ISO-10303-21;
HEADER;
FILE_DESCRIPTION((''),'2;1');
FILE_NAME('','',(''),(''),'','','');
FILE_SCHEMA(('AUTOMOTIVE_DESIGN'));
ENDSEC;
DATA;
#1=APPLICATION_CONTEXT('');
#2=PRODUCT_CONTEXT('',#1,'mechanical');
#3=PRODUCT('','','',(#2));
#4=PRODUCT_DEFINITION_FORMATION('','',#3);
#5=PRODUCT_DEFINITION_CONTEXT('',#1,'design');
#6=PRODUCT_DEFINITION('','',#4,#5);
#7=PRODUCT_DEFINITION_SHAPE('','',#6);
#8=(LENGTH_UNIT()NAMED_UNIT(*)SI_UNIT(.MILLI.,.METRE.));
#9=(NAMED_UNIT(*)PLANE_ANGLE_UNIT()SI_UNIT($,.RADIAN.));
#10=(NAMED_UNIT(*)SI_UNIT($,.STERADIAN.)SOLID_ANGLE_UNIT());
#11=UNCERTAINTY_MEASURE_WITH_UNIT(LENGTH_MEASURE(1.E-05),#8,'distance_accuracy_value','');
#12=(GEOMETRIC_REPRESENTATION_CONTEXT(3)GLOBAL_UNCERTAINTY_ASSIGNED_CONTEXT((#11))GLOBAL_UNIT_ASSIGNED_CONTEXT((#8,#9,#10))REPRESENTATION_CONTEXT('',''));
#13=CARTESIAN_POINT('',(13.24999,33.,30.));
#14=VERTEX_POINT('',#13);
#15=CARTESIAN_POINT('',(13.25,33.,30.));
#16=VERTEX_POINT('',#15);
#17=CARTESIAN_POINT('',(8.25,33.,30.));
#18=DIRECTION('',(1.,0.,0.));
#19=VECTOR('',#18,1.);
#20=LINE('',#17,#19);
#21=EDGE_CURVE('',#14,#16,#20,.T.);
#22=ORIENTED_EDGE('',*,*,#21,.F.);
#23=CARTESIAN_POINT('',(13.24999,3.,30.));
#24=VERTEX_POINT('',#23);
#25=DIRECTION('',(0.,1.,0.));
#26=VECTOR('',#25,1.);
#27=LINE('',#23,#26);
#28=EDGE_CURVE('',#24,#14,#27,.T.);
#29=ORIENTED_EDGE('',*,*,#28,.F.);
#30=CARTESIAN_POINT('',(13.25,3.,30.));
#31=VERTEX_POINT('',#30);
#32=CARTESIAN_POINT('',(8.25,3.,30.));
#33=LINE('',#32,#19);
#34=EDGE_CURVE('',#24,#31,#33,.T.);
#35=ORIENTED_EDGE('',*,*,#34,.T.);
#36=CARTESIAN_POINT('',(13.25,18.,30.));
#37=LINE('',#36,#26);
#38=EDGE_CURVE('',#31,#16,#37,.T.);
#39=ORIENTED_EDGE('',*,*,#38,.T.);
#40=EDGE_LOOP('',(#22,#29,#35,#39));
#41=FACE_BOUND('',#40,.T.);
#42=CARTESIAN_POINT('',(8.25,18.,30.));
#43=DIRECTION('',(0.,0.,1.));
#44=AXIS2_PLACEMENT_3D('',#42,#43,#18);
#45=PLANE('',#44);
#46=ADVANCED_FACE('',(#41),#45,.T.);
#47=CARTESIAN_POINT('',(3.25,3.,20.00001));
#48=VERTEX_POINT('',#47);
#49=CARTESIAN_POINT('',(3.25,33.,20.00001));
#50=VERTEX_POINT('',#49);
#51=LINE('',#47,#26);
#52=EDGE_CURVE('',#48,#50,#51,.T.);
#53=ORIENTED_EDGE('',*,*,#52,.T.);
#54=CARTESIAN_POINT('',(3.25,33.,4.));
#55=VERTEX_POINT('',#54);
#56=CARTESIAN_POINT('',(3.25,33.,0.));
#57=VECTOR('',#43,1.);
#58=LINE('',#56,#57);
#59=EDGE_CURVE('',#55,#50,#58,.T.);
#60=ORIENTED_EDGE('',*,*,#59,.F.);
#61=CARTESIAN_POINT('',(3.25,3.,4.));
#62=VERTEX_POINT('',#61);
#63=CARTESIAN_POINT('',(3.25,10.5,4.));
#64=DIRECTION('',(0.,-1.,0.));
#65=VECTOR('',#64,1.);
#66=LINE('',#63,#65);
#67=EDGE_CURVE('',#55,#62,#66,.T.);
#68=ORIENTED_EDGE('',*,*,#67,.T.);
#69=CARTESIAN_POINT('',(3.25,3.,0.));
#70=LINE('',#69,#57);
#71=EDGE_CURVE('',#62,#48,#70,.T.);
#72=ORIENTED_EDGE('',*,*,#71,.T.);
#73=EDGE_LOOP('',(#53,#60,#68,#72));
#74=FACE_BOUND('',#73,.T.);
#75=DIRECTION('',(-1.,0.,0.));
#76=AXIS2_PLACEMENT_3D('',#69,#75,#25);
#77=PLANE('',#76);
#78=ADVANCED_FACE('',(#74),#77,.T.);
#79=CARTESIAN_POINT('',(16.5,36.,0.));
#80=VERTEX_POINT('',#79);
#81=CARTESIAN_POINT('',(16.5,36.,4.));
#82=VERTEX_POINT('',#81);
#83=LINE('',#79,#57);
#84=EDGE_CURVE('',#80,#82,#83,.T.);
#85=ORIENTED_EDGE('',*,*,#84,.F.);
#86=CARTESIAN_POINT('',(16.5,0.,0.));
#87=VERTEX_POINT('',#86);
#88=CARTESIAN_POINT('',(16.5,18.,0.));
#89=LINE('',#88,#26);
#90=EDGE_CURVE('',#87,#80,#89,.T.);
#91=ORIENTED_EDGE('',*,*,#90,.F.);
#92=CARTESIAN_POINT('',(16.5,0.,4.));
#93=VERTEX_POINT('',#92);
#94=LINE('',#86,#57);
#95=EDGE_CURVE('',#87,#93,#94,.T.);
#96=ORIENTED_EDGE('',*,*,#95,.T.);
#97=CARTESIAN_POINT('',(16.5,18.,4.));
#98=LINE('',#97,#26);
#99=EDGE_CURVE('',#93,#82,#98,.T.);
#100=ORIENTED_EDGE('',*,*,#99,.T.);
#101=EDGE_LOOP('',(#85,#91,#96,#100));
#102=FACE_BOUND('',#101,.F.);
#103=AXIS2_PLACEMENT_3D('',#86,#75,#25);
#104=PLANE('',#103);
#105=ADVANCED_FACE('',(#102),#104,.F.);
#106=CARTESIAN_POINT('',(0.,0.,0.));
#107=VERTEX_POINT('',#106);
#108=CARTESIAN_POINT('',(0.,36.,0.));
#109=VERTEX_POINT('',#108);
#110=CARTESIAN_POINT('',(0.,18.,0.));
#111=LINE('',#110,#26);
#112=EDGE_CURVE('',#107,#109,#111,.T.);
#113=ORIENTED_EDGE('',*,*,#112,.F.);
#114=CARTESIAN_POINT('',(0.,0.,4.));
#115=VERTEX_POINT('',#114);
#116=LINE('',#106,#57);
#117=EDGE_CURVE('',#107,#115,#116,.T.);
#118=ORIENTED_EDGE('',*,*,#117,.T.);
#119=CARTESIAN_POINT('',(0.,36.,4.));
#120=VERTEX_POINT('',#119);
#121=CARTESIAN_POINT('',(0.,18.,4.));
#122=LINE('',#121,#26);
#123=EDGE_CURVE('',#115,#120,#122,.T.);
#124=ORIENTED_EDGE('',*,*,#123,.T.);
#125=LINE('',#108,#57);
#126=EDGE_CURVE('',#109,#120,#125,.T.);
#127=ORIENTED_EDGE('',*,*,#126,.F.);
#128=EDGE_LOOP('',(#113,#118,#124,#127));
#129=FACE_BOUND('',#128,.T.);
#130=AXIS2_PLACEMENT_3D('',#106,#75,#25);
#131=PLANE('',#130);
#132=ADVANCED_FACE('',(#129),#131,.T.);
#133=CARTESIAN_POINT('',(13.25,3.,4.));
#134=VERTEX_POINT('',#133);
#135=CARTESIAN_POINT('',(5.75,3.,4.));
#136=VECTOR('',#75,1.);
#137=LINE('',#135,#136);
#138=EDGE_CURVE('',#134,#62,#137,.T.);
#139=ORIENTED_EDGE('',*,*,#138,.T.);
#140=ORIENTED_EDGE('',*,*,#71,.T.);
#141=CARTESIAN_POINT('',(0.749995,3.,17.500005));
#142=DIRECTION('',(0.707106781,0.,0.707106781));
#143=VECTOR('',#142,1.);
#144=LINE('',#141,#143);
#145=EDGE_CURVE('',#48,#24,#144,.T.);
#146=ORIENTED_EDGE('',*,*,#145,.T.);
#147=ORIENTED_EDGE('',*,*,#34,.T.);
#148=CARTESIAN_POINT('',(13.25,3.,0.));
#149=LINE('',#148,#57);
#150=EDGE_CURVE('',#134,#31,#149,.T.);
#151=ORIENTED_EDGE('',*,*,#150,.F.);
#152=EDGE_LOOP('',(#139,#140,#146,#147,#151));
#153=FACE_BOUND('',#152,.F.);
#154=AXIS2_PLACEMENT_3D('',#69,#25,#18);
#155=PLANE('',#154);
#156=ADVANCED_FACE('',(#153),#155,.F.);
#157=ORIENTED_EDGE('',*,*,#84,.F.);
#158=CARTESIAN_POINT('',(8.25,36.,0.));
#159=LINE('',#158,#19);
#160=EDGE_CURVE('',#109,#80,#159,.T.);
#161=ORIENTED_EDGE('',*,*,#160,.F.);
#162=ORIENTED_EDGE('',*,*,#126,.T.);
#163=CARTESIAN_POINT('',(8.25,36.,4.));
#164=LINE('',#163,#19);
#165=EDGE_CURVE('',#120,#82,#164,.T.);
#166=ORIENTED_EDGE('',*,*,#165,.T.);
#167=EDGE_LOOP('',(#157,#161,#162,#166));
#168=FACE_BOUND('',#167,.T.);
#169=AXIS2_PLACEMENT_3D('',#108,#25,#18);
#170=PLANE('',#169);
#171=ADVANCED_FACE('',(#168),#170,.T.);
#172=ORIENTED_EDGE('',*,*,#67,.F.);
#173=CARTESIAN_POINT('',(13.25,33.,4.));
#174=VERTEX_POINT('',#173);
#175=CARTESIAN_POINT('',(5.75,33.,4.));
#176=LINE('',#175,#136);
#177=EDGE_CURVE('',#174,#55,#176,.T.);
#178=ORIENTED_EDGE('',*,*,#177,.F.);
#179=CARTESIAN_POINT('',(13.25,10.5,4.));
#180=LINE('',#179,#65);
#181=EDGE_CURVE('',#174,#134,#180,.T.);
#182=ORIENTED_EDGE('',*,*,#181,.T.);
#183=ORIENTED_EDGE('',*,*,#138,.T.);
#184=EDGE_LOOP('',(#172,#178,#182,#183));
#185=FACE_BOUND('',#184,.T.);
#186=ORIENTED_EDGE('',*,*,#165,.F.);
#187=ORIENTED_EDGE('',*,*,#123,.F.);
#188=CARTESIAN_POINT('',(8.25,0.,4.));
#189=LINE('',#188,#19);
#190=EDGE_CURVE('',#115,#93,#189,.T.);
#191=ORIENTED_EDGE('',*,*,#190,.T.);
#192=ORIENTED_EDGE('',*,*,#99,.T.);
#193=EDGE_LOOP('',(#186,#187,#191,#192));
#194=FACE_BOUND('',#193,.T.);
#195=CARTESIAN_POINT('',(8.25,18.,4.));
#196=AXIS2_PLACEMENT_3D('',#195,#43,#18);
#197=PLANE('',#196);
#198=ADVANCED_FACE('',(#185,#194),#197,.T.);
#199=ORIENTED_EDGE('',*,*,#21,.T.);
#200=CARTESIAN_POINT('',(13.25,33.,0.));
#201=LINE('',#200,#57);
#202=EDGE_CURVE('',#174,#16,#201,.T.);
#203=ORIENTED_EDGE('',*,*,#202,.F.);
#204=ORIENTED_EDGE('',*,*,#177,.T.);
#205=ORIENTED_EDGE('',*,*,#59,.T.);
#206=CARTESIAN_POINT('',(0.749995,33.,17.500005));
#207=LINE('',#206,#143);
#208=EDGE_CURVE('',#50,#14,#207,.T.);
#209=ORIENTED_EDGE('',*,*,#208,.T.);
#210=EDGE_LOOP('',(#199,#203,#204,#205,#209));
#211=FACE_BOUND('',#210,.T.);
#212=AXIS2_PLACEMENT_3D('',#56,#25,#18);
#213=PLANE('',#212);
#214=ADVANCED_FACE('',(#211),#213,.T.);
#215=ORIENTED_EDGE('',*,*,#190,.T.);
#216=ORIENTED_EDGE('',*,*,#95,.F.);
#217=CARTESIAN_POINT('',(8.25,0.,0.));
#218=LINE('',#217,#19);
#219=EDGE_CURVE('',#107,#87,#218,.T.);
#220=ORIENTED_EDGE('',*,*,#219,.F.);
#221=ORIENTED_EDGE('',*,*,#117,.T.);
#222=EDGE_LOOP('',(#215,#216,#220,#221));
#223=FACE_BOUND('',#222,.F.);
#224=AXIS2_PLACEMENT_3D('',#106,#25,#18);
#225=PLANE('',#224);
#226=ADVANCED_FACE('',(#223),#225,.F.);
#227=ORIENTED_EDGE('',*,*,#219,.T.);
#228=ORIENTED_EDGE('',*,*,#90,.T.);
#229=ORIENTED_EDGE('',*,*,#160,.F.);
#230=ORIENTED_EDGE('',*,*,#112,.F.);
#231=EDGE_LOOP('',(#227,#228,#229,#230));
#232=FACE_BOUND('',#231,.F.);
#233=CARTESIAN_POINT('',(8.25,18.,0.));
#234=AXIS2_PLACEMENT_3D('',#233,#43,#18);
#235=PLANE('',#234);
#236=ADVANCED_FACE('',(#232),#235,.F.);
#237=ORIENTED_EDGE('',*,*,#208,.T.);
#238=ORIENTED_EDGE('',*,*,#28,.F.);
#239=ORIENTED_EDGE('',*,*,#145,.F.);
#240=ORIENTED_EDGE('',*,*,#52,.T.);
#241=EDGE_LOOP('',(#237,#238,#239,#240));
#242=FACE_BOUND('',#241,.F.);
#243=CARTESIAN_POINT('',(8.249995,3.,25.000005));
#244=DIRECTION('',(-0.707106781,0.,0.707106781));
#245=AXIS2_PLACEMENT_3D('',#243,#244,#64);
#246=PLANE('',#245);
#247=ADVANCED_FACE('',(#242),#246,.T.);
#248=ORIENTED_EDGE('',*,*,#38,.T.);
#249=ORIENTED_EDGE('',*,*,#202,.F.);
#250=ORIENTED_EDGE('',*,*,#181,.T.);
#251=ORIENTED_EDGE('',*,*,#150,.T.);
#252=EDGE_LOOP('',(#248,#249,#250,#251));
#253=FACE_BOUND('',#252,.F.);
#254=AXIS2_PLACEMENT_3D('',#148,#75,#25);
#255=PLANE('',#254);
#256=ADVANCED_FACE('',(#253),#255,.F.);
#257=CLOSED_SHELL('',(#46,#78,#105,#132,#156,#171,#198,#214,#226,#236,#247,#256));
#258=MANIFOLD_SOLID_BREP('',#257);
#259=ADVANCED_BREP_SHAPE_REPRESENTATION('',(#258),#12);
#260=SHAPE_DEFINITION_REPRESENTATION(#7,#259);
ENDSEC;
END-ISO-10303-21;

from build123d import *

# Parameters (mm, degrees)
F0_W     = 16.5
F0_H     = 36
F1_DEPTH = 4
F2_W     = 10
F2_H     = 30
F3_DEPTH = 30
F4_SIZE  = 9.99999


# Not quite as in the source:
# - a fillet or chamfer is up to 0.001 mm smaller than in the source, because OpenCascade refuses the exact size


with BuildPart() as f1:
    # F0 (on Top) → F1 (new body)
    with BuildSketch(Plane.XY):
        with Locations((8.25, 18)):
            Rectangle(F0_W, F0_H)
    extrude(amount=F1_DEPTH)

    # F2 (on Top) → F3 (join)
    with BuildSketch(Plane.XY):
        with Locations((8.25, 18)):
            Rectangle(F2_W, F2_H)
    extrude(amount=F3_DEPTH)

    # F4 (size 10 in the source; OpenCascade refuses exactly that, so slightly less here)
    f4_edges = [f1.edges().sort_by_distance(p)[0] for p in [
        (3.25, 18, 30),
    ]]
    chamfer(f4_edges, length=F4_SIZE)


solid = f1.part
